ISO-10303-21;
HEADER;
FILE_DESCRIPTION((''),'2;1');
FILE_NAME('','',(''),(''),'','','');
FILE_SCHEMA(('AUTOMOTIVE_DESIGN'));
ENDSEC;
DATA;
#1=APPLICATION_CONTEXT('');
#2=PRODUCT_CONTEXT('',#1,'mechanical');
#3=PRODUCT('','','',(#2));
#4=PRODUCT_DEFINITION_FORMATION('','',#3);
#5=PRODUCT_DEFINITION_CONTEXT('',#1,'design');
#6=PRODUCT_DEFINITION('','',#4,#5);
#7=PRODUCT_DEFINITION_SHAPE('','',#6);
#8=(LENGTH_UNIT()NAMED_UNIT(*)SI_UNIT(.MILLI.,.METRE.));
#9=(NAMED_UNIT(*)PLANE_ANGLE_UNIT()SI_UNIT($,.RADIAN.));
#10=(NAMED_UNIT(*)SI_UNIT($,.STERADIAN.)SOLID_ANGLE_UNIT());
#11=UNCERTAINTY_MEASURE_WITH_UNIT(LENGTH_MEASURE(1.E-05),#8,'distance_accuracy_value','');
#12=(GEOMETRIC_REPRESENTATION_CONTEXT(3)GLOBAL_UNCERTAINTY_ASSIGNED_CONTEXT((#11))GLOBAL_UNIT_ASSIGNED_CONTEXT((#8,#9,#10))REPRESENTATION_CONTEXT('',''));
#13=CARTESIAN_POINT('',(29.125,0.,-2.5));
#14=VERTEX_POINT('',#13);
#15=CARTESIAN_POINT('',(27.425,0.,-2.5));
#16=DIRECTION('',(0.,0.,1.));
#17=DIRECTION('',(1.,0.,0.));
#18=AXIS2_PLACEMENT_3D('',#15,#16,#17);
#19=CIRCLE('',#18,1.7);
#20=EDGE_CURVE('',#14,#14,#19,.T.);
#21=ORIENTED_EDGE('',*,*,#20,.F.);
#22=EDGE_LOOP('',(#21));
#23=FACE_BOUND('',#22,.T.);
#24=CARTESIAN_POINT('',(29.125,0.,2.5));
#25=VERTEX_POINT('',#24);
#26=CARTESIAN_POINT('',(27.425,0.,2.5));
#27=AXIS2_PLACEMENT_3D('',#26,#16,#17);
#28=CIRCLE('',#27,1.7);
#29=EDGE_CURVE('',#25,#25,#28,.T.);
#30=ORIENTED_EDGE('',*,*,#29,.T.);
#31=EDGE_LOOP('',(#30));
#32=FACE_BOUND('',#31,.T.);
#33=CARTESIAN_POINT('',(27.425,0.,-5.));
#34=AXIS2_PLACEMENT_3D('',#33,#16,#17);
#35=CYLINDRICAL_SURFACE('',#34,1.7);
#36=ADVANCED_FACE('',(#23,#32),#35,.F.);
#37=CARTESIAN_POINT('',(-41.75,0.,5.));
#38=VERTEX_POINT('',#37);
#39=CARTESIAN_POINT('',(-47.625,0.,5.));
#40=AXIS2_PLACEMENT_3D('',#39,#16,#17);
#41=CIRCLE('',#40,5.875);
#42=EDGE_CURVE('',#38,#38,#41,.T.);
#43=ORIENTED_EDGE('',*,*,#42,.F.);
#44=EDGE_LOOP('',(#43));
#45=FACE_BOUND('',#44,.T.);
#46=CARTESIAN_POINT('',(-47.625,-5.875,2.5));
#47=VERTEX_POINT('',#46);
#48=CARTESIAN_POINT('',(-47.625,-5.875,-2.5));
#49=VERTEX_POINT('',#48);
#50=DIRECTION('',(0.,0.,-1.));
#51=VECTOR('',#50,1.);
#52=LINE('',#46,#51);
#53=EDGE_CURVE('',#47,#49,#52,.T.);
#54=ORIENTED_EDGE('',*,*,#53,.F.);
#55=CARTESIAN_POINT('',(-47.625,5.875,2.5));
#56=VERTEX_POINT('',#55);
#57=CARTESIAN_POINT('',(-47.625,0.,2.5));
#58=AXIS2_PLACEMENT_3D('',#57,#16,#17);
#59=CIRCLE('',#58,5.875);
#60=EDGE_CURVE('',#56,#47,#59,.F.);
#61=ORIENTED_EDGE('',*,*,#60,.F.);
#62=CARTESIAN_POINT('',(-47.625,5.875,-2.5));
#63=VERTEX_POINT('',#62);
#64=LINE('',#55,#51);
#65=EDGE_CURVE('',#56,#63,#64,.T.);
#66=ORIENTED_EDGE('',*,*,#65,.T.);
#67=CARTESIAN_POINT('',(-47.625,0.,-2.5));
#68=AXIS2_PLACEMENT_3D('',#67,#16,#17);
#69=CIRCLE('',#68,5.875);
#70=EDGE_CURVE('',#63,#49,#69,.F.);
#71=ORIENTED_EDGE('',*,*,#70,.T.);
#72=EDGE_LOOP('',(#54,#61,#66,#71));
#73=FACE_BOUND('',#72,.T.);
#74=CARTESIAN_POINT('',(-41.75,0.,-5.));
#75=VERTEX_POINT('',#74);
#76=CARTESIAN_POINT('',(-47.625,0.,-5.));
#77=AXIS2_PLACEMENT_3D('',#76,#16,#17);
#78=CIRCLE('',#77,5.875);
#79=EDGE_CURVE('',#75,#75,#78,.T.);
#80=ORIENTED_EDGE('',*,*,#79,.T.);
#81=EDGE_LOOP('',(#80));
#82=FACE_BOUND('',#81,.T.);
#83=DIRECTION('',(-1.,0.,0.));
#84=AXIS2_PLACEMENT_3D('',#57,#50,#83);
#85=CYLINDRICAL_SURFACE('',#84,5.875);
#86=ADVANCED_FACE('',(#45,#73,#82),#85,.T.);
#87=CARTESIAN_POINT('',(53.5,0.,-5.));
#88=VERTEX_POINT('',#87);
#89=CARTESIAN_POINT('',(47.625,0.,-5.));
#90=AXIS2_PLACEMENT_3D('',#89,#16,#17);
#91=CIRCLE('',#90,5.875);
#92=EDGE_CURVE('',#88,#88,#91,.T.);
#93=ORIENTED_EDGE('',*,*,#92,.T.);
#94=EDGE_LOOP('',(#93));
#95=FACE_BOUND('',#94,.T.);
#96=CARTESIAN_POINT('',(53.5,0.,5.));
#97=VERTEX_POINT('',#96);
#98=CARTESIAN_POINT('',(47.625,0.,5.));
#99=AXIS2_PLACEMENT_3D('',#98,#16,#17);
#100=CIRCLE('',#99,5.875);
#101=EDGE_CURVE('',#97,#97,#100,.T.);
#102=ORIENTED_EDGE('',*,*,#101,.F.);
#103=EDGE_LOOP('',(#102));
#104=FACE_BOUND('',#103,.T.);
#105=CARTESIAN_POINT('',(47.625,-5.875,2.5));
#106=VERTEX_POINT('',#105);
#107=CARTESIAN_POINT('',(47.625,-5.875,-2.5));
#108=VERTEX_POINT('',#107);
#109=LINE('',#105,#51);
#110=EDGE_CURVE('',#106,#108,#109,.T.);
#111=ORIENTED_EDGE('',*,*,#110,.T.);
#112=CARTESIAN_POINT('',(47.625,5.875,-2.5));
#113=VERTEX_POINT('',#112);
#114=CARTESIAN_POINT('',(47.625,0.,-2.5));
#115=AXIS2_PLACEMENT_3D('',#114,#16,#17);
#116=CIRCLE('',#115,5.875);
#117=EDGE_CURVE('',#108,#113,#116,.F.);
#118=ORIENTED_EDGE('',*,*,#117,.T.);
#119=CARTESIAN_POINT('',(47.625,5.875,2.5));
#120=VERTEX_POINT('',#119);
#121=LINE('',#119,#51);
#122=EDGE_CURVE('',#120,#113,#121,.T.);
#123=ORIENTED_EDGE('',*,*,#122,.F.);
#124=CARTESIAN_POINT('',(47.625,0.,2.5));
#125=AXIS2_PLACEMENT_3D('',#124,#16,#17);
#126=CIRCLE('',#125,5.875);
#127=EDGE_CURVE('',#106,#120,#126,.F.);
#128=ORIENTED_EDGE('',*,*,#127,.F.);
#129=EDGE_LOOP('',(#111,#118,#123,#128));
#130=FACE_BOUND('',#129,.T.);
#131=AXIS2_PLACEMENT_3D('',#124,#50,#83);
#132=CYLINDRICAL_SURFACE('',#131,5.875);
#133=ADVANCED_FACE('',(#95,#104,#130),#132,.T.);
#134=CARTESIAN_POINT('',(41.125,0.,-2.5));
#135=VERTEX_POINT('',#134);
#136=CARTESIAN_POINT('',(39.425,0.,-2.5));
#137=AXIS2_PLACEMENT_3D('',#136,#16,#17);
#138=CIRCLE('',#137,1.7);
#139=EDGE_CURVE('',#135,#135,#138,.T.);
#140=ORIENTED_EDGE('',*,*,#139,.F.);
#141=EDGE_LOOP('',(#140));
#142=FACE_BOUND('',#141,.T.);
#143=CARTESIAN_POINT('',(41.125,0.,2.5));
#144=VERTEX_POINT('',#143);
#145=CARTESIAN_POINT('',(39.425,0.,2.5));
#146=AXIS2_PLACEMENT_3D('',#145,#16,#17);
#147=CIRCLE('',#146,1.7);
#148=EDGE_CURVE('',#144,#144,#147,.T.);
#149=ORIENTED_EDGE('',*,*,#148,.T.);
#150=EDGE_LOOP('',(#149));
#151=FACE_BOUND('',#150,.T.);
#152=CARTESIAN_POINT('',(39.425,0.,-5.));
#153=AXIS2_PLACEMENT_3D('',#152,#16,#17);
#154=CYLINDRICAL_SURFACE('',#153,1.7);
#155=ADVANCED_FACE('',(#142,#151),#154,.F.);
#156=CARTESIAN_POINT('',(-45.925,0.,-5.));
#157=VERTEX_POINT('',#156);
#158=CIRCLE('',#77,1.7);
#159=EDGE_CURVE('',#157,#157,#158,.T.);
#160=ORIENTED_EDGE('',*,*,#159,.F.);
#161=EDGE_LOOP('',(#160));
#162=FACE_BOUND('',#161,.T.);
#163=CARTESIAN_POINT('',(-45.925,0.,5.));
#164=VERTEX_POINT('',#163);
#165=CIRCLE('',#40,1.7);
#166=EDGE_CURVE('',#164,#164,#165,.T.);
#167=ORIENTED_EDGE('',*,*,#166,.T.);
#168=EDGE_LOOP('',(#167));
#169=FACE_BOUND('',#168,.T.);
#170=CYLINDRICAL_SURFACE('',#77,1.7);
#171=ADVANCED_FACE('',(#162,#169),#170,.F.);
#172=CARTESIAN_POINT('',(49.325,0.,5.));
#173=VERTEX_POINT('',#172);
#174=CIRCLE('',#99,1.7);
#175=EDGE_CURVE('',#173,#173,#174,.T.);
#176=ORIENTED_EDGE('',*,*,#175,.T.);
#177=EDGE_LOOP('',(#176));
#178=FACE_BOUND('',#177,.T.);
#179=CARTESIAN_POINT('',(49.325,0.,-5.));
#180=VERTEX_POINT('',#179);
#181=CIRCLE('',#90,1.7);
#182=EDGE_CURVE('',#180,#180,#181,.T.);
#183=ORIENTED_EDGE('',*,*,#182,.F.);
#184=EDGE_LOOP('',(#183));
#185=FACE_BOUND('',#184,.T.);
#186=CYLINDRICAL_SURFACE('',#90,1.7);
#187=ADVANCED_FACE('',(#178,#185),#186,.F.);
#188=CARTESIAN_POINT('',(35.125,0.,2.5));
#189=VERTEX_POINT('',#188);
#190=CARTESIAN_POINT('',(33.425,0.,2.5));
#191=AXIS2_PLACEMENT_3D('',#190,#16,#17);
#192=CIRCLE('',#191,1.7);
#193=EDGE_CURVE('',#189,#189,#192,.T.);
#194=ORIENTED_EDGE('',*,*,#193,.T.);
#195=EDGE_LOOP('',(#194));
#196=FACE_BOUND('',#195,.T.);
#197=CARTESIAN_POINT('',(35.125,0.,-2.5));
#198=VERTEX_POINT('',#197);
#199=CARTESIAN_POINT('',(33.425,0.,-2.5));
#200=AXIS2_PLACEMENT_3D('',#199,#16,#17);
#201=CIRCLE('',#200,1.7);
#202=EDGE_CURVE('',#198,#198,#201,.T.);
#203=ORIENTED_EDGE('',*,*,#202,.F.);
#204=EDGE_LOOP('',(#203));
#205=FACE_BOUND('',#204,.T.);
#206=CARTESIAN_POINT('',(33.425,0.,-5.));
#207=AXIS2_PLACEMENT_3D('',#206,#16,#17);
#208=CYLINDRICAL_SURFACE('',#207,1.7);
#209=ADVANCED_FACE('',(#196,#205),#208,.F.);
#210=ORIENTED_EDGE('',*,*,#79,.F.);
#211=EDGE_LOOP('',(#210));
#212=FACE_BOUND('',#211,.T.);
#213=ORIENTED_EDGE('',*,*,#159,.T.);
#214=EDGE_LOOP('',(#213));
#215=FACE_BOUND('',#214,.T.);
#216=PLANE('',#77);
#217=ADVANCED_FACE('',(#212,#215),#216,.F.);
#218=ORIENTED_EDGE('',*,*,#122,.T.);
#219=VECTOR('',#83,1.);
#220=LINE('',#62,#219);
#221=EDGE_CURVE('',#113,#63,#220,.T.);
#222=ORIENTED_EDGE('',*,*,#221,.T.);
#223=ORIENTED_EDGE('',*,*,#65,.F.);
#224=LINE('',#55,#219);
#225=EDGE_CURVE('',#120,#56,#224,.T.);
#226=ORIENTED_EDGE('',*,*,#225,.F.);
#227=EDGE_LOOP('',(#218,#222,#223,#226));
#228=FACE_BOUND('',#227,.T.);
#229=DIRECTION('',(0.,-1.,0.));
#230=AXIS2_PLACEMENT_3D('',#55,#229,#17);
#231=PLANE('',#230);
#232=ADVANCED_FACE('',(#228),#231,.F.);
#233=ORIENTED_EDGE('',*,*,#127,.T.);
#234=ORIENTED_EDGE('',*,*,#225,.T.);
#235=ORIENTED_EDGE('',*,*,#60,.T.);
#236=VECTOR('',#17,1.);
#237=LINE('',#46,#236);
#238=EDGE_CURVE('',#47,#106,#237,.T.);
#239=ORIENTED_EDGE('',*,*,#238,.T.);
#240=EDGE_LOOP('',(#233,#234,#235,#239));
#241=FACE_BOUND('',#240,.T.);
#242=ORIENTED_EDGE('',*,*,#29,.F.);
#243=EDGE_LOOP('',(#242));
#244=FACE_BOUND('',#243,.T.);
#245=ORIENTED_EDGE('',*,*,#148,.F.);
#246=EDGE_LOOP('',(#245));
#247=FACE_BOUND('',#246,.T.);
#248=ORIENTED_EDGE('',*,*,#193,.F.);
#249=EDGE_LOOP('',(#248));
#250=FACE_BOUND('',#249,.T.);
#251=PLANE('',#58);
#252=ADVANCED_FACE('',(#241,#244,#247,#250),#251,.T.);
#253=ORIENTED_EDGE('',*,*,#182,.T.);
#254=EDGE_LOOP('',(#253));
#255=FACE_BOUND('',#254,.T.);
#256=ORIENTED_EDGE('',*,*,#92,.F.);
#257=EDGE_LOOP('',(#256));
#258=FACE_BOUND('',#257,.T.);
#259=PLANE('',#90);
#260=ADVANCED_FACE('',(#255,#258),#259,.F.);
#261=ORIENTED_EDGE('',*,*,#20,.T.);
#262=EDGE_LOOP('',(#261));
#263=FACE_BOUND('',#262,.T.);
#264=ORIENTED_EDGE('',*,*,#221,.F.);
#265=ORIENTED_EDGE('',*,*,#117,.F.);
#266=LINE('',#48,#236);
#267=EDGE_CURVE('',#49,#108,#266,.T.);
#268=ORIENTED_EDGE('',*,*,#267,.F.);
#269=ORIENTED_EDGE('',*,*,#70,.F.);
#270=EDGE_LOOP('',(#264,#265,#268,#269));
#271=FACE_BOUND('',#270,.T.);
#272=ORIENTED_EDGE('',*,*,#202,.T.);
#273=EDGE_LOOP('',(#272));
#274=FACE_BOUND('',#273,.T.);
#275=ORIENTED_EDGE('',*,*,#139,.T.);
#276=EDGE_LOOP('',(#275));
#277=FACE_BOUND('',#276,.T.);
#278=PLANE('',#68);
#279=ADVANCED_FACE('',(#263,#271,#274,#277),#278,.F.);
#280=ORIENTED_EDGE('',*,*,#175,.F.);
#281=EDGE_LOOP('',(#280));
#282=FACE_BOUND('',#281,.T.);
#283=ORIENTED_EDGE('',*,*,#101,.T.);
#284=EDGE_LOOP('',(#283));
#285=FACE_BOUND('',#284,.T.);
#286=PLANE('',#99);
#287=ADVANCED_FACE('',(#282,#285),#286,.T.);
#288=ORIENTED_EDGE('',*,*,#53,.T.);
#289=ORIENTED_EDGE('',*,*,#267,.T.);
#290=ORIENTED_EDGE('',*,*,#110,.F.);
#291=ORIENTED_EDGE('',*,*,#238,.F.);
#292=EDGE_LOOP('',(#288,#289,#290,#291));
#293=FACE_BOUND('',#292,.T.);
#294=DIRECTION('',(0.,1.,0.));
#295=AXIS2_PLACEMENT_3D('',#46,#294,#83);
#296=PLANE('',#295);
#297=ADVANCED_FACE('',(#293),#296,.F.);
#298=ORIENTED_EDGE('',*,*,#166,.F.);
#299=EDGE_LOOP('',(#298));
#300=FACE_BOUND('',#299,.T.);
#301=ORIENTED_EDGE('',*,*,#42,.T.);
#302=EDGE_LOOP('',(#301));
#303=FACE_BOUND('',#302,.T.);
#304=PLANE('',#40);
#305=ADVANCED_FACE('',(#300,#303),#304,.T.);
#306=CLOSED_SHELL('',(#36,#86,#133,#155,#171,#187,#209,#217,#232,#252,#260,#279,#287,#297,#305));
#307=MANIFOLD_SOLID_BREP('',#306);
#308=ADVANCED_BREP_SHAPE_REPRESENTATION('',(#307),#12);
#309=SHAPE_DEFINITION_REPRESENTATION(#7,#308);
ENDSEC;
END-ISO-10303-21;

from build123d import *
from build123d.topology import SkipClean

# Parameters (mm, degrees)
BOSS_EXTRUDE1_DEPTH     = 2.5
SKETCH3_R               = 5.875
BOSS_EXTRUDE2_DEPTH     = 5
CUT_EXTRUDE1_DEPTH      = 55.053359054
CUT_EXTRUDE1_DEPTH_BACK = 55.053359054
SKETCH2_R               = 1.7
CUT_EXTRUDE2_DEPTH      = 55.341656443
CUT_EXTRUDE2_DEPTH_BACK = 55.341656443
SKETCH4_R               = 1.7


with BuildPart() as part:
    # Sketch1 → Boss-Extrude1 (new, symmetric)
    with BuildSketch(Plane.XY):
        with BuildLine():
            Line((-47.625, 5.875), (47.625, 5.875))
            ThreePointArc((47.625, 5.875), (53.5, 0), (47.625, -5.875))
            Line((47.625, -5.875), (-47.625, -5.875))
            ThreePointArc((-47.625, -5.875), (-53.5, 0), (-47.625, 5.875))
        make_face()
    extrude(amount=BOSS_EXTRUDE1_DEPTH, both=True)

    # Sketch3 → Boss-Extrude2 (add, symmetric)
    with SkipClean():  # the faces are left unmerged after this step: merging them gives an invalid solid
        with BuildSketch(Plane.XY):
            with Locations((-47.625, 0)):
                Circle(SKETCH3_R)
            with Locations((47.625, 0)):
                Circle(SKETCH3_R)
        extrude(amount=BOSS_EXTRUDE2_DEPTH, both=True)
    add(part.part.scale(1), mode=Mode.REPLACE)  # the faces are merged on a copy

    # Sketch2 → Cut-Extrude1 (cut, two sides: drawn at the far end of the back side and taken through both)
    with BuildSketch(Plane.XY.offset(-CUT_EXTRUDE1_DEPTH_BACK)):
        with Locations((-47.625, 0)):
            Circle(SKETCH2_R)
        with Locations((47.625, 0)):
            Circle(SKETCH2_R)
    extrude(amount=CUT_EXTRUDE1_DEPTH + CUT_EXTRUDE1_DEPTH_BACK, mode=Mode.SUBTRACT)

    # Sketch4 → Cut-Extrude2 (cut, two sides: drawn at the far end of the back side and taken through both)
    with BuildSketch(Plane.XY.offset(2.5).offset(-CUT_EXTRUDE2_DEPTH_BACK)):
        with Locations((33.425, 0)):
            Circle(SKETCH4_R)
        with Locations((27.425, 0)):
            Circle(SKETCH4_R)
        with Locations((39.425, 0)):
            Circle(SKETCH4_R)
    extrude(amount=CUT_EXTRUDE2_DEPTH + CUT_EXTRUDE2_DEPTH_BACK, mode=Mode.SUBTRACT)


solid = part.part
